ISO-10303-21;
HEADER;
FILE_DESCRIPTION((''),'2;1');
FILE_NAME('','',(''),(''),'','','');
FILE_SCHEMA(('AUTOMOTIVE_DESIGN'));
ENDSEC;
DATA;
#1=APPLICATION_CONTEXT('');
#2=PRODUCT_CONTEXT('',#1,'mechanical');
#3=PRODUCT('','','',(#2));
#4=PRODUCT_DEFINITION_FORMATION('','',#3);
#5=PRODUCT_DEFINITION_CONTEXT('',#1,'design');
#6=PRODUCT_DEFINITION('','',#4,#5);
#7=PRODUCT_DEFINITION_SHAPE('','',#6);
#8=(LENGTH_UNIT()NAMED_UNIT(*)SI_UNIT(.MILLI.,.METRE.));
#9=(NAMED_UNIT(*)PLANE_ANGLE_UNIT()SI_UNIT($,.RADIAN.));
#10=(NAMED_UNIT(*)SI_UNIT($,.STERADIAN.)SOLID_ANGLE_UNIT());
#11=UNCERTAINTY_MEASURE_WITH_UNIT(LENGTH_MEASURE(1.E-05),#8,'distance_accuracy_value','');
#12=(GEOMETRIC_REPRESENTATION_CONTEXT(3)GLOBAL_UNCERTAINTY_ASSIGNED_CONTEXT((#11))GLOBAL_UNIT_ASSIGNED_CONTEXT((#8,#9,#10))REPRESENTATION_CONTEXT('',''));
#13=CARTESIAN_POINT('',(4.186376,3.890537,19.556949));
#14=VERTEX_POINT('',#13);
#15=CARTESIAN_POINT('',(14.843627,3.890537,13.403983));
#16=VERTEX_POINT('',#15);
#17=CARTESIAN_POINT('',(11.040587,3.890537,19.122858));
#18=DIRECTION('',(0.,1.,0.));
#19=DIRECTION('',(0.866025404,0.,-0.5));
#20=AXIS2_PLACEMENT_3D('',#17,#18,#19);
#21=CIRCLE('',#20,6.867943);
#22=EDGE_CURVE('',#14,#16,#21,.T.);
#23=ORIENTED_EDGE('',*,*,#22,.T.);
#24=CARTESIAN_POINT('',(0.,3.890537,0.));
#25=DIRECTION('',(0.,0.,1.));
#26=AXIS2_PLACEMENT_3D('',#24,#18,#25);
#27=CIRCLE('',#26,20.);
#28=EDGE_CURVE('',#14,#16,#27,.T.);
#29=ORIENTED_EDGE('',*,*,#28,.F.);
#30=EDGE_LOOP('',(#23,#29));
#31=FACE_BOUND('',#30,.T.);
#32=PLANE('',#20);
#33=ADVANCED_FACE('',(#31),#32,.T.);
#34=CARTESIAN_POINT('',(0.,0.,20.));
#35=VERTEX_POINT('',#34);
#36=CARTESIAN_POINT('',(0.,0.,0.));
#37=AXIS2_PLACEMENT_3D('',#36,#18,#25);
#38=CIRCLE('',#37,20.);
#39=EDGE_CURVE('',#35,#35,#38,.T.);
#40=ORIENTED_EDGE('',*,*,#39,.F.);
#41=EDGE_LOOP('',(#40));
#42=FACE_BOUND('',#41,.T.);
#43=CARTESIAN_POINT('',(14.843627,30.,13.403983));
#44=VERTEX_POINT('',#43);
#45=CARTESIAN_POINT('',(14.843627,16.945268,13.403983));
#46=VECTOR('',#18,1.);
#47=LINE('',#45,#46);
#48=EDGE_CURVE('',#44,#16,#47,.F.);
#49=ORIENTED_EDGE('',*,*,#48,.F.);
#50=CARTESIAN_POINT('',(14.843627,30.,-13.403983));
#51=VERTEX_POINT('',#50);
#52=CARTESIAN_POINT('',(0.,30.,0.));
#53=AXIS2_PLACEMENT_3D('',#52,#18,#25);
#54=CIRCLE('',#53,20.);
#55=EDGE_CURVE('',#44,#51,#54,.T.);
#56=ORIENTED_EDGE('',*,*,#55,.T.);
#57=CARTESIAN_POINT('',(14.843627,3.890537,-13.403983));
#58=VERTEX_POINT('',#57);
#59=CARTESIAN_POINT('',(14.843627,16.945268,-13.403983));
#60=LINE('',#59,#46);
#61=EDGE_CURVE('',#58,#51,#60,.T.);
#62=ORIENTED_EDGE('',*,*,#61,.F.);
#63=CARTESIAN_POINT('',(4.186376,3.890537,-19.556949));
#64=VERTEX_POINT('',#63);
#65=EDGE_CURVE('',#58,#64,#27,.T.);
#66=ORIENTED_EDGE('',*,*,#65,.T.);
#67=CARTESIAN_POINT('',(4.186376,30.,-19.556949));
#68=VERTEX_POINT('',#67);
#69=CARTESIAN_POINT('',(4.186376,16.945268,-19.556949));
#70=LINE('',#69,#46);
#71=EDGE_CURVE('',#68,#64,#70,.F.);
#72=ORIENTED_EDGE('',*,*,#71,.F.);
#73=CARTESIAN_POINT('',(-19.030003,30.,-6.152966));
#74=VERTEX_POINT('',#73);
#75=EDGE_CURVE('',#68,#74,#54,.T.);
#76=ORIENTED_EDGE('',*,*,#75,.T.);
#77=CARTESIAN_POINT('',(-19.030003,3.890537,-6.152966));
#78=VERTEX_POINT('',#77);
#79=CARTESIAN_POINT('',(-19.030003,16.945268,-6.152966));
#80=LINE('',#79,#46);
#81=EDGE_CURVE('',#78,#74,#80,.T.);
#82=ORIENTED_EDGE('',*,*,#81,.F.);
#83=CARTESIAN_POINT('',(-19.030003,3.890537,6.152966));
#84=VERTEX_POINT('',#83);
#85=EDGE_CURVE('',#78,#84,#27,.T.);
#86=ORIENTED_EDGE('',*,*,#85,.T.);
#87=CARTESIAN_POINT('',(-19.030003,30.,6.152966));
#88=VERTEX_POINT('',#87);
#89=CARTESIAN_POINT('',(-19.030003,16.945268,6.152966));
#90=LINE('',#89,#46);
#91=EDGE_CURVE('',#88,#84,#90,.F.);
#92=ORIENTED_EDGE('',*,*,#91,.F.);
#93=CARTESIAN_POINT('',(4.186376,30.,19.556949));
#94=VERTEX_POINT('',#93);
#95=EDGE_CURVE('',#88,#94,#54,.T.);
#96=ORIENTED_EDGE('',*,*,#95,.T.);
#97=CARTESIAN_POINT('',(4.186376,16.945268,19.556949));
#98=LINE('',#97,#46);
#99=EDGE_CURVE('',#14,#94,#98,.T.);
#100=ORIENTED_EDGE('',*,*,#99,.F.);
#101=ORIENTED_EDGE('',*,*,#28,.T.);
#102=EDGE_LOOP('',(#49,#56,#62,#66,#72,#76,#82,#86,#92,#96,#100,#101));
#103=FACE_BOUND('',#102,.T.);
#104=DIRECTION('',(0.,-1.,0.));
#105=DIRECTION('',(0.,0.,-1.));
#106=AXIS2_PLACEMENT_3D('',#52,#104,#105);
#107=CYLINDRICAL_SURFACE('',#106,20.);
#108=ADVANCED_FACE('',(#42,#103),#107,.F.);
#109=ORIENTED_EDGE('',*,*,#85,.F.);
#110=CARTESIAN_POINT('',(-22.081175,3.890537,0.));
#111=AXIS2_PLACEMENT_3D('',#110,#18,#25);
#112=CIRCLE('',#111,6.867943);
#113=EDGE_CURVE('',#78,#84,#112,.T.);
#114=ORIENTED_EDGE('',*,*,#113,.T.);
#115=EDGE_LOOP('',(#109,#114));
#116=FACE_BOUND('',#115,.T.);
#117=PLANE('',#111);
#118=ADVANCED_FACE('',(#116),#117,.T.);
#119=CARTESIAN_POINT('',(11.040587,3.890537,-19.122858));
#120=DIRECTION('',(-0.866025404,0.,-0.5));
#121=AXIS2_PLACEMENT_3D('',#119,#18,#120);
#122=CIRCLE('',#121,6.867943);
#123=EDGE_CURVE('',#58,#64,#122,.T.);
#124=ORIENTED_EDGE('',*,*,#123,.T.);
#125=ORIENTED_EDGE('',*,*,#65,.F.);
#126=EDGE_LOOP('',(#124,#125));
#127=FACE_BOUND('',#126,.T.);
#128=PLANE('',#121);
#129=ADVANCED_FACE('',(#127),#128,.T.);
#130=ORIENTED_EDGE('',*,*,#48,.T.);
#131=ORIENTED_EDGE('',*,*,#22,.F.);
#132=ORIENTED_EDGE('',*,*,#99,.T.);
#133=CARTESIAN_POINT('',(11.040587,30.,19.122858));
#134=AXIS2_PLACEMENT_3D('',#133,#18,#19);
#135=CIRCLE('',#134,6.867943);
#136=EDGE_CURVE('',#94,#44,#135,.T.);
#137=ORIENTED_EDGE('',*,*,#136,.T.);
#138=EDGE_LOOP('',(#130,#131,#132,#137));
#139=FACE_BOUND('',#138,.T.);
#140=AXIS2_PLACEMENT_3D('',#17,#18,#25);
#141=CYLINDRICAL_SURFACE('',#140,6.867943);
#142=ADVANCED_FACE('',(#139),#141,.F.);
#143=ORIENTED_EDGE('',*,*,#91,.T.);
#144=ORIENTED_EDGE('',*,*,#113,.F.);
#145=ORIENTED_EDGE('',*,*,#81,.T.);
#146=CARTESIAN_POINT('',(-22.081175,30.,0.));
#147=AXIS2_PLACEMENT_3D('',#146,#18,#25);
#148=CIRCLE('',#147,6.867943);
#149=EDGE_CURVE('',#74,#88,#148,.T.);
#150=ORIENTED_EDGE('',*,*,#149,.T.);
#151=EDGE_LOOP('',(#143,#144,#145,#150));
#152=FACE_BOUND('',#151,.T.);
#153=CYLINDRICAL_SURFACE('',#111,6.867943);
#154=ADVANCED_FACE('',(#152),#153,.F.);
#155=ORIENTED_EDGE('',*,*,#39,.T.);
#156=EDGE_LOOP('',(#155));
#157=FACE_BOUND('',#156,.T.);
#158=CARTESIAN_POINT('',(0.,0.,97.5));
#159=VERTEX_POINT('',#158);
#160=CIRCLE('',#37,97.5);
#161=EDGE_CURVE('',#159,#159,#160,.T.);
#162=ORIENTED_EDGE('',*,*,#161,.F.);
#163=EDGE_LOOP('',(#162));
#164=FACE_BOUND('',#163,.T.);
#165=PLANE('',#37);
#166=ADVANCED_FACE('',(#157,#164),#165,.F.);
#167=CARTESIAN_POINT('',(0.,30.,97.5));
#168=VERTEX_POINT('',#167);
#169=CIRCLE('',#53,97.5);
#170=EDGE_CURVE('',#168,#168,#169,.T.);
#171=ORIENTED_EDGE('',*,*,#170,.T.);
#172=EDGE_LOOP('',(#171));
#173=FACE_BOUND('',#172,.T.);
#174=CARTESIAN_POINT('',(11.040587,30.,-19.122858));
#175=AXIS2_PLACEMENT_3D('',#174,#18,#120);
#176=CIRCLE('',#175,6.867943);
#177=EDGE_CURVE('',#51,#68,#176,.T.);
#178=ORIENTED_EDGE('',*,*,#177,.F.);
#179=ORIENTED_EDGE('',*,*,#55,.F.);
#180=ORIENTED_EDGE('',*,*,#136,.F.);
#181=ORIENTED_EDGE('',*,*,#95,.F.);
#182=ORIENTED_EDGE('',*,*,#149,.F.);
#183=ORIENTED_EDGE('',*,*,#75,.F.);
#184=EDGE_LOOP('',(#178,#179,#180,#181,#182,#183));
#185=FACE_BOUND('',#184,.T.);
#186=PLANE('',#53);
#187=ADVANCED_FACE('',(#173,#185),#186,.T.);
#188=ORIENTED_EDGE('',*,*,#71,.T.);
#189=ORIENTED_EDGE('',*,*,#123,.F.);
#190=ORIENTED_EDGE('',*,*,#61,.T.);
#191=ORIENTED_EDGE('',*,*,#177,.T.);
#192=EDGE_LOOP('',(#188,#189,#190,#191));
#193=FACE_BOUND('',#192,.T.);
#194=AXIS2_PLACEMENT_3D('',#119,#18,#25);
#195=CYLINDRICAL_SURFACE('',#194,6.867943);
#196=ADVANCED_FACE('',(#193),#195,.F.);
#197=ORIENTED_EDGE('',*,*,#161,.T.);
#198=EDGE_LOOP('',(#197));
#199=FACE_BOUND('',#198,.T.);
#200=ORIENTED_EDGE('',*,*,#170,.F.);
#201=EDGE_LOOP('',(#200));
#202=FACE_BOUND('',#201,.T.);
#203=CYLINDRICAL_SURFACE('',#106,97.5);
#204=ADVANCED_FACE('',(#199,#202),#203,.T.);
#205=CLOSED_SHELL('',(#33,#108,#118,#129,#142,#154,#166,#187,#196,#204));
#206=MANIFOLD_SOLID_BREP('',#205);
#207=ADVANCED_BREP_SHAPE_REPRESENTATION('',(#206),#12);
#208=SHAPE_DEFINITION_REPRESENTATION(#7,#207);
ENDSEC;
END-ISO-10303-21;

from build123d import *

# Parameters (mm, degrees)
SKETCH1_R           = 97.5
BOSS_EXTRUDE1_DEPTH = 30
SKETCH2_R           = 20
CUT_EXTRUDE1_DEPTH  = 142.111657917
SKETCH3_R           = 6.867943311
CUT_EXTRUDE2_DEPTH  = 26.109463305
CIRPATTERN1_COUNT   = 3


with BuildPart() as part:
    # Sketch1 → Boss-Extrude1 (new body)
    with BuildSketch(Plane(origin=(0, 0, 0), x_dir=(1, 0, 0), z_dir=(0, 1, 0))):
        Circle(SKETCH1_R)
    extrude(amount=BOSS_EXTRUDE1_DEPTH)

    # Sketch2 → Cut-Extrude1 (cut, through all)
    with BuildSketch(Plane(origin=(0, 0, 0), x_dir=(1, 0, 0), z_dir=(0, 1, 0))):
        Circle(SKETCH2_R)
    extrude(amount=CUT_EXTRUDE1_DEPTH, mode=Mode.SUBTRACT)

    # Sketch3 → Cut-Extrude2 (cut)
    with BuildSketch(Plane(origin=(0, 30, 0), x_dir=(1, 0, 0), z_dir=(0, 1, 0))):
        with Locations((-22.081174807, 0)):
            Circle(SKETCH3_R)
    cut_extrude2 = extrude(amount=-CUT_EXTRUDE2_DEPTH, mode=Mode.SUBTRACT)

    # CirPattern1: Cut-Extrude2 ×3 about axis
    cirpattern1_axis = Axis((0, 0, 0), (0, 1, 0))
    for i in range(1, CIRPATTERN1_COUNT):
        add(cut_extrude2.rotate(cirpattern1_axis, i * 360 / CIRPATTERN1_COUNT), mode=Mode.SUBTRACT)


solid = part.part
